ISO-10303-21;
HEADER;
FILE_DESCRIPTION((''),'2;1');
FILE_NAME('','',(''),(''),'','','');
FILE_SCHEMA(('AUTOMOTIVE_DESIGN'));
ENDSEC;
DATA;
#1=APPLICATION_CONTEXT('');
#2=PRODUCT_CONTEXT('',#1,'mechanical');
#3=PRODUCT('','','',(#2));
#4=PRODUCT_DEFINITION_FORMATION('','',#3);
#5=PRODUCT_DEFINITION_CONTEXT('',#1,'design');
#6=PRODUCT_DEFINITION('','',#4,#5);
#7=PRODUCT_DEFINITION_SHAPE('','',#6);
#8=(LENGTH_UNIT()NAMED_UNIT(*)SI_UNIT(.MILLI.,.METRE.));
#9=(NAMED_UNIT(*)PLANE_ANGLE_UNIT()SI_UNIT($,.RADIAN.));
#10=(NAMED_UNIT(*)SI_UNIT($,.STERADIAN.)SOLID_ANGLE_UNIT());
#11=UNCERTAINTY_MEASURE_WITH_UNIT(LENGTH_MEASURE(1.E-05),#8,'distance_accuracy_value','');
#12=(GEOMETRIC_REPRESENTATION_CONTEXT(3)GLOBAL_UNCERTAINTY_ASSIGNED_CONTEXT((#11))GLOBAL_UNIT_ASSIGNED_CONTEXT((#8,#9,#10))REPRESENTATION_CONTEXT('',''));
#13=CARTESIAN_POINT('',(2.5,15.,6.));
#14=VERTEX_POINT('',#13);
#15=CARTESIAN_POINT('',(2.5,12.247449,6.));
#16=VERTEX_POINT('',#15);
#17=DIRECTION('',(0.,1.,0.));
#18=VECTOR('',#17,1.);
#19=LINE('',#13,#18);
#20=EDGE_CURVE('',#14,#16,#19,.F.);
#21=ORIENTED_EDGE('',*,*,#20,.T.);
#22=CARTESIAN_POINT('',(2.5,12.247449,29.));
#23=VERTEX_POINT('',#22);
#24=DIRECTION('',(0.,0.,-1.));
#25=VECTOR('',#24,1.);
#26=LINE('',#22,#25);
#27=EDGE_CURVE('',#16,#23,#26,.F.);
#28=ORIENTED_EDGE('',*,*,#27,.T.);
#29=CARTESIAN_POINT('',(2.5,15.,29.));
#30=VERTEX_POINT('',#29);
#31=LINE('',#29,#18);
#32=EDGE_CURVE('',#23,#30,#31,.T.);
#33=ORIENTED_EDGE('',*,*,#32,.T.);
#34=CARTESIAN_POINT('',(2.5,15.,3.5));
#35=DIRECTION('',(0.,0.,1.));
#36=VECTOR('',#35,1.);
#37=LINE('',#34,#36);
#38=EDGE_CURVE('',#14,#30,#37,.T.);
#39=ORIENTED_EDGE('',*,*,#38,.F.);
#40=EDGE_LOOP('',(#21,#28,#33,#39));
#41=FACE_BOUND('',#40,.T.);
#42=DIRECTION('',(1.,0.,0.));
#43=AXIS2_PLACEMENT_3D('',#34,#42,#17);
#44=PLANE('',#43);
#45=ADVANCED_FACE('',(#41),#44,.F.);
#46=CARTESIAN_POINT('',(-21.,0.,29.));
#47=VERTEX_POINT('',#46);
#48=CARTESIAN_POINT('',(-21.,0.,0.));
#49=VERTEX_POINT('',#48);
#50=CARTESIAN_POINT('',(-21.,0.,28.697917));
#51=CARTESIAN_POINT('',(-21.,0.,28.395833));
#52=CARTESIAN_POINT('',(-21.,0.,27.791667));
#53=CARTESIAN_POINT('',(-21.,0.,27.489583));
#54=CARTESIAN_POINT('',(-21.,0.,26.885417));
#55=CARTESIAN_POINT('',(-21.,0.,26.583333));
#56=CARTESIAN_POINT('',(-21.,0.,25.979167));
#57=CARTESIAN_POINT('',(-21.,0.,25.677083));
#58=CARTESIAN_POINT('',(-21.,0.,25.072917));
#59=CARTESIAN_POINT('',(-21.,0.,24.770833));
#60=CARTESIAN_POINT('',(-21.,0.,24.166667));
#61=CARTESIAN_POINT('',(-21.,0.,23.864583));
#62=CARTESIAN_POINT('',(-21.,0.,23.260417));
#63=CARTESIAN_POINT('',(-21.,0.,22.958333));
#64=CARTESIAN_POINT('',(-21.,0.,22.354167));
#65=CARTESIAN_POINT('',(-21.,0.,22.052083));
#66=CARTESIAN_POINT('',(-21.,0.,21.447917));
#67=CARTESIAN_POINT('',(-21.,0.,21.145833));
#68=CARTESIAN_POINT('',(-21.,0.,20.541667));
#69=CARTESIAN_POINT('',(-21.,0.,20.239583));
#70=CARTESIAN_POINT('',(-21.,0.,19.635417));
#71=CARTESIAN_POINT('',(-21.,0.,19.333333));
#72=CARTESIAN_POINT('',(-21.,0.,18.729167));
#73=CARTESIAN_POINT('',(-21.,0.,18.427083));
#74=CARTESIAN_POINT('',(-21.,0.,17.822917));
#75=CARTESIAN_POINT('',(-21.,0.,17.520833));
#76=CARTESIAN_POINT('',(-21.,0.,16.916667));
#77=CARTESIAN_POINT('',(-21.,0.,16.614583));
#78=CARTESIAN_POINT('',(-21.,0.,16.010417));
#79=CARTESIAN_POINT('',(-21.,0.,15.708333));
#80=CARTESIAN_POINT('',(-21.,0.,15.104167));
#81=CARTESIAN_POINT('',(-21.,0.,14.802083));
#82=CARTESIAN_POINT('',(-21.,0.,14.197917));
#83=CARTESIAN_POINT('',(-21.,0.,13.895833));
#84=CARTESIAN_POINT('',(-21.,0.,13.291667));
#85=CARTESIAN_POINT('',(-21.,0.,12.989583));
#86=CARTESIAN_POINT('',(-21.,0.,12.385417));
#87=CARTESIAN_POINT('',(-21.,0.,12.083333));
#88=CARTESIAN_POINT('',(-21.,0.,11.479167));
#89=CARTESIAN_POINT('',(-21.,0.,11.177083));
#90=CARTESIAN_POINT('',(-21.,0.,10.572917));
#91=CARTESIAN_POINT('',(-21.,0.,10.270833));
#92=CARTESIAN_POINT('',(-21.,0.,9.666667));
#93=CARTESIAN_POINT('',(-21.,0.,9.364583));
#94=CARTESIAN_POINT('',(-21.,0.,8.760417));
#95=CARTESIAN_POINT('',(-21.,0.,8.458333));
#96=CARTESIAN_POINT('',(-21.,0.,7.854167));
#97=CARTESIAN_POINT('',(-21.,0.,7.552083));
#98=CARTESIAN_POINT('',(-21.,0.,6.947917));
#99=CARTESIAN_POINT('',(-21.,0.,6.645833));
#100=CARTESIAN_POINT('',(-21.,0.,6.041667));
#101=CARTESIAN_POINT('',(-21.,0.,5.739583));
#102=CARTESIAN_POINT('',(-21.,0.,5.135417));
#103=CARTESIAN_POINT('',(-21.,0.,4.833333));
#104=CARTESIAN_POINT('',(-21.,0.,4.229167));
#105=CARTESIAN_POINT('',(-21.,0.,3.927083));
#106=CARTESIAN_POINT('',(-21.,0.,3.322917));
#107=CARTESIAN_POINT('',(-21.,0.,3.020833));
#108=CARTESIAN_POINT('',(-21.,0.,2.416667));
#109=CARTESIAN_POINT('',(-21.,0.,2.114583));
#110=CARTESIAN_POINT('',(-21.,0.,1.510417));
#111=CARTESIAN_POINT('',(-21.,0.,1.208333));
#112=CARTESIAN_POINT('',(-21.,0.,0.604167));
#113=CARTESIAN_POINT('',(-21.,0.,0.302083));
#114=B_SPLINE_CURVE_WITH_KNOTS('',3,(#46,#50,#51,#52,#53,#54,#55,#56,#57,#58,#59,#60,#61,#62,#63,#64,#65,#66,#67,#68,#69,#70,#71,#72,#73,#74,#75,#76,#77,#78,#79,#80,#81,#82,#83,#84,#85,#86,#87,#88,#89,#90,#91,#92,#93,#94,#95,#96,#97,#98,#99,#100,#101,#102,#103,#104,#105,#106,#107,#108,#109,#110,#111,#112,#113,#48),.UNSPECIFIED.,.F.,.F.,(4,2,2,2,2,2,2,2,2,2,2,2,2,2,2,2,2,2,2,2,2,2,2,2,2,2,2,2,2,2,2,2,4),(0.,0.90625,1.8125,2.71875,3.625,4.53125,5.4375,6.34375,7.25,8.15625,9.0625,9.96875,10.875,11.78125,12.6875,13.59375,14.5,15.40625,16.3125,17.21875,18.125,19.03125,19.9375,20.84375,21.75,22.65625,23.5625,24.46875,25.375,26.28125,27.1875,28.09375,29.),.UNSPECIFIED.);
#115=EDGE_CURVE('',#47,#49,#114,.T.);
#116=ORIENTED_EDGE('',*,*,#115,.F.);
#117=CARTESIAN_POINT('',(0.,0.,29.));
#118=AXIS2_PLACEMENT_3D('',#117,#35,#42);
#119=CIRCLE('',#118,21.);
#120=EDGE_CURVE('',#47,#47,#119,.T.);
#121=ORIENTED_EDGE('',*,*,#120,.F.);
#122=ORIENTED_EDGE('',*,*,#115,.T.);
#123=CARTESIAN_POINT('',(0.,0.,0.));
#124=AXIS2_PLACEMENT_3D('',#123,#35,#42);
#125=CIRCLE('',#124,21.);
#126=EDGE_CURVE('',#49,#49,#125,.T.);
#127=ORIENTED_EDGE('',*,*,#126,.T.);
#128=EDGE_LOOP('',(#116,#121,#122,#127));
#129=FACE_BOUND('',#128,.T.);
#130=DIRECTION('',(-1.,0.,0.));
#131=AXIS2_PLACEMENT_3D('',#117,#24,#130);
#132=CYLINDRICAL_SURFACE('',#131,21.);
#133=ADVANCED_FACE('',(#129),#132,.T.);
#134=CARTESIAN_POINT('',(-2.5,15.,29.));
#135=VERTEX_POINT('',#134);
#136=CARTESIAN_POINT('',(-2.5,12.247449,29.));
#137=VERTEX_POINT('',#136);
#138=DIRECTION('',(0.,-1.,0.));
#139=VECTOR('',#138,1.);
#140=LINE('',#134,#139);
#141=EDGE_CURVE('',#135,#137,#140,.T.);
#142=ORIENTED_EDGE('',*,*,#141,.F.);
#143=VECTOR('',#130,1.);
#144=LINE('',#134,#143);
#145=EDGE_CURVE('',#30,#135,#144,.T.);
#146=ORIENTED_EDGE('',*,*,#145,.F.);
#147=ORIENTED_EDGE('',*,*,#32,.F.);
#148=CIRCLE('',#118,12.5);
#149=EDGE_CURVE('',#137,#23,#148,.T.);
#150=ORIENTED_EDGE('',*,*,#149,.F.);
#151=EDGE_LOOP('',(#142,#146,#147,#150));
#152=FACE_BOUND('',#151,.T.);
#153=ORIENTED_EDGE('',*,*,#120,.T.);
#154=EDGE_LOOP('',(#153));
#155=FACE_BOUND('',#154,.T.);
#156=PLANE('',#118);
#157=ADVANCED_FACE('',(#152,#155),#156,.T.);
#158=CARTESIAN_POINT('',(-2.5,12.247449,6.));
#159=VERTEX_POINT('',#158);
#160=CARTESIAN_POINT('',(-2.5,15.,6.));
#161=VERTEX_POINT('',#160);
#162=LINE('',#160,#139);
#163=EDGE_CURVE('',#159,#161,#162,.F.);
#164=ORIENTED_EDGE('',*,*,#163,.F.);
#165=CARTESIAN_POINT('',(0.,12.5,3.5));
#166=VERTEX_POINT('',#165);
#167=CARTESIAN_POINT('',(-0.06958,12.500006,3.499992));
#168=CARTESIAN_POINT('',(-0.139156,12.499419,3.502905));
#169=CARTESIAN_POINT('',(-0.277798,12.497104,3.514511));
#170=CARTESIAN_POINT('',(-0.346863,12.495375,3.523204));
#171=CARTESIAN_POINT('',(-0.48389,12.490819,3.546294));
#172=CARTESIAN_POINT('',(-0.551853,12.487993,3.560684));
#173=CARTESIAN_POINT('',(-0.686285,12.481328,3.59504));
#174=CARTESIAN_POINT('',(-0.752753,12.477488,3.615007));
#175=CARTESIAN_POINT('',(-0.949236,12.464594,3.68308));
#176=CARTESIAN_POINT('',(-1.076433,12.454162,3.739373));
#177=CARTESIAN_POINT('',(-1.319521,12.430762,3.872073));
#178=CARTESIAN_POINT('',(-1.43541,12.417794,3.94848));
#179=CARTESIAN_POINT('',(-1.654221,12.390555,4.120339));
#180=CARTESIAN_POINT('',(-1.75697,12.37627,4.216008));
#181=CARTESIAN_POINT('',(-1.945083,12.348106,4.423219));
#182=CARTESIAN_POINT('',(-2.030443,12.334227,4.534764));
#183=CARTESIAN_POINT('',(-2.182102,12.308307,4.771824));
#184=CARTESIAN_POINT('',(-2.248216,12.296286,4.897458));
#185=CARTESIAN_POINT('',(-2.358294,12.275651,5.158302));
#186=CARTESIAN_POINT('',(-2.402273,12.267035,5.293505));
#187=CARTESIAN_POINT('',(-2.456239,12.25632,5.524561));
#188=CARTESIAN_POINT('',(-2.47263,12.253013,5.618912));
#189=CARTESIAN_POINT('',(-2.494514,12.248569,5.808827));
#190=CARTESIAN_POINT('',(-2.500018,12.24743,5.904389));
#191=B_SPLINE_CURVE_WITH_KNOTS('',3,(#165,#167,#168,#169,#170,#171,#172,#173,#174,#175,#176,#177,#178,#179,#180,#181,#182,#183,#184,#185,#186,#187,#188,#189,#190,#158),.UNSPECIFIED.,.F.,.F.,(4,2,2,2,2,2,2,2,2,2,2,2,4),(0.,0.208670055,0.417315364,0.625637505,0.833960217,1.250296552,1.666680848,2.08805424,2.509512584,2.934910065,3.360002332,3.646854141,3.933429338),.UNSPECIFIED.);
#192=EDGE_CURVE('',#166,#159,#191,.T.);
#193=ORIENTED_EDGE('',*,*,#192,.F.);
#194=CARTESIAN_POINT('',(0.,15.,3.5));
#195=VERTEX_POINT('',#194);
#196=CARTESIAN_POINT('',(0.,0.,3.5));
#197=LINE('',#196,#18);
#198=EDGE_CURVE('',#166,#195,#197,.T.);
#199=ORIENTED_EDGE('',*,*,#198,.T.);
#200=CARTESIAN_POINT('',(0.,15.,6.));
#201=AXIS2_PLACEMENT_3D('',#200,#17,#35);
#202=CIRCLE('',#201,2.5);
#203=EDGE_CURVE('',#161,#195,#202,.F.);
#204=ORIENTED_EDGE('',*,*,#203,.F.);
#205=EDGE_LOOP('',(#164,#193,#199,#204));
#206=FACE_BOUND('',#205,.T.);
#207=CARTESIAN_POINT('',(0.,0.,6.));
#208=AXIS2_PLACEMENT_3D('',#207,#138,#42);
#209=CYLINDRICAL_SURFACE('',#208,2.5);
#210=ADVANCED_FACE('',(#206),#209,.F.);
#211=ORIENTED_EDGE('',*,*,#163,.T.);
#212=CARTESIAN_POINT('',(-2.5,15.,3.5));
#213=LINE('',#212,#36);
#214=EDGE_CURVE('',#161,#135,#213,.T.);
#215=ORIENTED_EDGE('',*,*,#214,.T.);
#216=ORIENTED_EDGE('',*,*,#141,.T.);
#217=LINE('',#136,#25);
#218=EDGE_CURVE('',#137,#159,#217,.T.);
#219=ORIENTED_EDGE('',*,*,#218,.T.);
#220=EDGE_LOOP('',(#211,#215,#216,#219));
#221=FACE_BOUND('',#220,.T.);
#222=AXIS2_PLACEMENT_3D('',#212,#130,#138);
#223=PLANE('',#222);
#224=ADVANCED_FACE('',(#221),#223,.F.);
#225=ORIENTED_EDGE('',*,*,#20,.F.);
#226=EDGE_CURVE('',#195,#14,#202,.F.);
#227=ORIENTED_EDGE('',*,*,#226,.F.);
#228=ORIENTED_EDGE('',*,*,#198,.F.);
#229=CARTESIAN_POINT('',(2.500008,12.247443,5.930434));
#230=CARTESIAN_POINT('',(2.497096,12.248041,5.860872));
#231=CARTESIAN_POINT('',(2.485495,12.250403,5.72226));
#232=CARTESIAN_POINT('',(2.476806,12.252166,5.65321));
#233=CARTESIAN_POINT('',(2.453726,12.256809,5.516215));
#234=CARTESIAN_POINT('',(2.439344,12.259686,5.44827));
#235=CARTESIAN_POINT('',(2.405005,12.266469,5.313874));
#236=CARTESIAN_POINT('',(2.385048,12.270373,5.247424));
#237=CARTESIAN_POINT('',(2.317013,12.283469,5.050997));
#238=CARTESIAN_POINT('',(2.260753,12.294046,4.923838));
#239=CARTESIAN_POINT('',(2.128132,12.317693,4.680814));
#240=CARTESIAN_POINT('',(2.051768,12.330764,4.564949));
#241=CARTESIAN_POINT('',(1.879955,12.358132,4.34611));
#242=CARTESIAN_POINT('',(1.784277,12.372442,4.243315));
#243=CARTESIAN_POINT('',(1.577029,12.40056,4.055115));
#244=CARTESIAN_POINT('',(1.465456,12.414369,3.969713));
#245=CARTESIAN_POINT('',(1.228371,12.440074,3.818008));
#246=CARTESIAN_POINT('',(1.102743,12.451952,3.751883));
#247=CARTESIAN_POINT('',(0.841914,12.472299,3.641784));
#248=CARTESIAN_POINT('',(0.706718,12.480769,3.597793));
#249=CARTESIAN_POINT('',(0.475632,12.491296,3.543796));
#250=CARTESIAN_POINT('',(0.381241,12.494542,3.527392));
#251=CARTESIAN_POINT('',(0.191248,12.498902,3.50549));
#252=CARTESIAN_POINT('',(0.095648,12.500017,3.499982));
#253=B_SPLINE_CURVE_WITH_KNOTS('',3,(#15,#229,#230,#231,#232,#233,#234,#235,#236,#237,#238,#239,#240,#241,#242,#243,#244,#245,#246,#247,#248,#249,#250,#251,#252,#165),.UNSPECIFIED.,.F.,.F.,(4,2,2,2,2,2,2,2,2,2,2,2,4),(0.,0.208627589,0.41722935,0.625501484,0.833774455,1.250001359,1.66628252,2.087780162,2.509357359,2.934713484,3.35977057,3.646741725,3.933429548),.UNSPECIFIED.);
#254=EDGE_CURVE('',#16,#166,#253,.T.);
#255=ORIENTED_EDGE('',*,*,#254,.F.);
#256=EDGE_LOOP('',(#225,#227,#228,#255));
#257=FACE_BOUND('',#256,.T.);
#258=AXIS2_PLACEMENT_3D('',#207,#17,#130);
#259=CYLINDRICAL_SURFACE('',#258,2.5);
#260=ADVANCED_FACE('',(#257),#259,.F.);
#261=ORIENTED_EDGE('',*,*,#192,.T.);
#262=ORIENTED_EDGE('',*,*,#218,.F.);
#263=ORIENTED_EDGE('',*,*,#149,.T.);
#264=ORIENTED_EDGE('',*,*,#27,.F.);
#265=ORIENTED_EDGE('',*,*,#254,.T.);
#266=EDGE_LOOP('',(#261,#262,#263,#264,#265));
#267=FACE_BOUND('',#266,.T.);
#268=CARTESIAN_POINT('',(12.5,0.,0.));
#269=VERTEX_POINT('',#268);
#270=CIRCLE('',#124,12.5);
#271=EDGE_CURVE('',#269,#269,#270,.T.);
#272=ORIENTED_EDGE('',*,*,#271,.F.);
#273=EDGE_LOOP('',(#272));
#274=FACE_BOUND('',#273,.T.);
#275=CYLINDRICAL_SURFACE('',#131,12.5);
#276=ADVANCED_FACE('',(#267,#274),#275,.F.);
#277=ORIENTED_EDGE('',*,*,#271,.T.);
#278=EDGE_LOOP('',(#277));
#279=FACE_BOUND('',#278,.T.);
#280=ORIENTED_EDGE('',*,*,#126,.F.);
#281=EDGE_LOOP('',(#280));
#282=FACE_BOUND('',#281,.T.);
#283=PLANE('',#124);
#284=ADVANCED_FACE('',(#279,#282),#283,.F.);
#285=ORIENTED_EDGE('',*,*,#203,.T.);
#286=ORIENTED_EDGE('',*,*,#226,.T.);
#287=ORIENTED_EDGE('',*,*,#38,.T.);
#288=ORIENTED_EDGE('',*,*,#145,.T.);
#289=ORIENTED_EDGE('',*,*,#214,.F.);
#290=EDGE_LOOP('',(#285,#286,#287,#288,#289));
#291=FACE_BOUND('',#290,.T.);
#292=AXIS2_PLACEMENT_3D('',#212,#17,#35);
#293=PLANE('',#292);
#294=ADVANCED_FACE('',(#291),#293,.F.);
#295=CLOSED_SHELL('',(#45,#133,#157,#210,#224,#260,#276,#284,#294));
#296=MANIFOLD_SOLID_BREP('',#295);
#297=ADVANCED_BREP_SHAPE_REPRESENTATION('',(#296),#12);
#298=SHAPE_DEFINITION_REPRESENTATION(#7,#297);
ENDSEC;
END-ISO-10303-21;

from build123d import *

# Parameters (mm, degrees)
SKETCH1_R           = 21
SKETCH1_R_2         = 12.5
BOSS_EXTRUDE4_DEPTH = 29
SKETCH3_W           = 5
SKETCH3_H           = 5
CUT_EXTRUDE3_DEPTH  = 25.5
FILLET5_R           = 2.5
FILLET6_R           = 2.5


with BuildPart() as part:
    # Sketch1 → Boss-Extrude4 (new body)
    with BuildSketch(Plane.XY):
        with Locations(Location((0, 0, 0), (0, 0, 180))):
            Circle(SKETCH1_R)
        with Locations(Location((0, 0, 0), (0, 0, 180))):
            Circle(SKETCH1_R_2, mode=Mode.SUBTRACT)
    extrude(amount=BOSS_EXTRUDE4_DEPTH)

    # Sketch3 → Cut-Extrude3 (cut)
    with BuildSketch(Plane.XY.offset(29)):
        with Locations((0, 12.5)):
            Rectangle(SKETCH3_W, SKETCH3_H)
    extrude(amount=-CUT_EXTRUDE3_DEPTH, mode=Mode.SUBTRACT)

    # Fillet5
    fillet5_edges = [part.edges().sort_by_distance(p)[0] for p in [
        (2.5, 13.623724357, 3.5),
    ]]
    fillet(fillet5_edges, radius=FILLET5_R)

    # Fillet6
    fillet6_edges = [part.edges().sort_by_distance(p)[0] for p in [
        (-2.5, 13.623724357, 3.5),
    ]]
    fillet(fillet6_edges, radius=FILLET6_R - 0.0001)  # a hair under: the kernel refuses the full size


solid = part.part
